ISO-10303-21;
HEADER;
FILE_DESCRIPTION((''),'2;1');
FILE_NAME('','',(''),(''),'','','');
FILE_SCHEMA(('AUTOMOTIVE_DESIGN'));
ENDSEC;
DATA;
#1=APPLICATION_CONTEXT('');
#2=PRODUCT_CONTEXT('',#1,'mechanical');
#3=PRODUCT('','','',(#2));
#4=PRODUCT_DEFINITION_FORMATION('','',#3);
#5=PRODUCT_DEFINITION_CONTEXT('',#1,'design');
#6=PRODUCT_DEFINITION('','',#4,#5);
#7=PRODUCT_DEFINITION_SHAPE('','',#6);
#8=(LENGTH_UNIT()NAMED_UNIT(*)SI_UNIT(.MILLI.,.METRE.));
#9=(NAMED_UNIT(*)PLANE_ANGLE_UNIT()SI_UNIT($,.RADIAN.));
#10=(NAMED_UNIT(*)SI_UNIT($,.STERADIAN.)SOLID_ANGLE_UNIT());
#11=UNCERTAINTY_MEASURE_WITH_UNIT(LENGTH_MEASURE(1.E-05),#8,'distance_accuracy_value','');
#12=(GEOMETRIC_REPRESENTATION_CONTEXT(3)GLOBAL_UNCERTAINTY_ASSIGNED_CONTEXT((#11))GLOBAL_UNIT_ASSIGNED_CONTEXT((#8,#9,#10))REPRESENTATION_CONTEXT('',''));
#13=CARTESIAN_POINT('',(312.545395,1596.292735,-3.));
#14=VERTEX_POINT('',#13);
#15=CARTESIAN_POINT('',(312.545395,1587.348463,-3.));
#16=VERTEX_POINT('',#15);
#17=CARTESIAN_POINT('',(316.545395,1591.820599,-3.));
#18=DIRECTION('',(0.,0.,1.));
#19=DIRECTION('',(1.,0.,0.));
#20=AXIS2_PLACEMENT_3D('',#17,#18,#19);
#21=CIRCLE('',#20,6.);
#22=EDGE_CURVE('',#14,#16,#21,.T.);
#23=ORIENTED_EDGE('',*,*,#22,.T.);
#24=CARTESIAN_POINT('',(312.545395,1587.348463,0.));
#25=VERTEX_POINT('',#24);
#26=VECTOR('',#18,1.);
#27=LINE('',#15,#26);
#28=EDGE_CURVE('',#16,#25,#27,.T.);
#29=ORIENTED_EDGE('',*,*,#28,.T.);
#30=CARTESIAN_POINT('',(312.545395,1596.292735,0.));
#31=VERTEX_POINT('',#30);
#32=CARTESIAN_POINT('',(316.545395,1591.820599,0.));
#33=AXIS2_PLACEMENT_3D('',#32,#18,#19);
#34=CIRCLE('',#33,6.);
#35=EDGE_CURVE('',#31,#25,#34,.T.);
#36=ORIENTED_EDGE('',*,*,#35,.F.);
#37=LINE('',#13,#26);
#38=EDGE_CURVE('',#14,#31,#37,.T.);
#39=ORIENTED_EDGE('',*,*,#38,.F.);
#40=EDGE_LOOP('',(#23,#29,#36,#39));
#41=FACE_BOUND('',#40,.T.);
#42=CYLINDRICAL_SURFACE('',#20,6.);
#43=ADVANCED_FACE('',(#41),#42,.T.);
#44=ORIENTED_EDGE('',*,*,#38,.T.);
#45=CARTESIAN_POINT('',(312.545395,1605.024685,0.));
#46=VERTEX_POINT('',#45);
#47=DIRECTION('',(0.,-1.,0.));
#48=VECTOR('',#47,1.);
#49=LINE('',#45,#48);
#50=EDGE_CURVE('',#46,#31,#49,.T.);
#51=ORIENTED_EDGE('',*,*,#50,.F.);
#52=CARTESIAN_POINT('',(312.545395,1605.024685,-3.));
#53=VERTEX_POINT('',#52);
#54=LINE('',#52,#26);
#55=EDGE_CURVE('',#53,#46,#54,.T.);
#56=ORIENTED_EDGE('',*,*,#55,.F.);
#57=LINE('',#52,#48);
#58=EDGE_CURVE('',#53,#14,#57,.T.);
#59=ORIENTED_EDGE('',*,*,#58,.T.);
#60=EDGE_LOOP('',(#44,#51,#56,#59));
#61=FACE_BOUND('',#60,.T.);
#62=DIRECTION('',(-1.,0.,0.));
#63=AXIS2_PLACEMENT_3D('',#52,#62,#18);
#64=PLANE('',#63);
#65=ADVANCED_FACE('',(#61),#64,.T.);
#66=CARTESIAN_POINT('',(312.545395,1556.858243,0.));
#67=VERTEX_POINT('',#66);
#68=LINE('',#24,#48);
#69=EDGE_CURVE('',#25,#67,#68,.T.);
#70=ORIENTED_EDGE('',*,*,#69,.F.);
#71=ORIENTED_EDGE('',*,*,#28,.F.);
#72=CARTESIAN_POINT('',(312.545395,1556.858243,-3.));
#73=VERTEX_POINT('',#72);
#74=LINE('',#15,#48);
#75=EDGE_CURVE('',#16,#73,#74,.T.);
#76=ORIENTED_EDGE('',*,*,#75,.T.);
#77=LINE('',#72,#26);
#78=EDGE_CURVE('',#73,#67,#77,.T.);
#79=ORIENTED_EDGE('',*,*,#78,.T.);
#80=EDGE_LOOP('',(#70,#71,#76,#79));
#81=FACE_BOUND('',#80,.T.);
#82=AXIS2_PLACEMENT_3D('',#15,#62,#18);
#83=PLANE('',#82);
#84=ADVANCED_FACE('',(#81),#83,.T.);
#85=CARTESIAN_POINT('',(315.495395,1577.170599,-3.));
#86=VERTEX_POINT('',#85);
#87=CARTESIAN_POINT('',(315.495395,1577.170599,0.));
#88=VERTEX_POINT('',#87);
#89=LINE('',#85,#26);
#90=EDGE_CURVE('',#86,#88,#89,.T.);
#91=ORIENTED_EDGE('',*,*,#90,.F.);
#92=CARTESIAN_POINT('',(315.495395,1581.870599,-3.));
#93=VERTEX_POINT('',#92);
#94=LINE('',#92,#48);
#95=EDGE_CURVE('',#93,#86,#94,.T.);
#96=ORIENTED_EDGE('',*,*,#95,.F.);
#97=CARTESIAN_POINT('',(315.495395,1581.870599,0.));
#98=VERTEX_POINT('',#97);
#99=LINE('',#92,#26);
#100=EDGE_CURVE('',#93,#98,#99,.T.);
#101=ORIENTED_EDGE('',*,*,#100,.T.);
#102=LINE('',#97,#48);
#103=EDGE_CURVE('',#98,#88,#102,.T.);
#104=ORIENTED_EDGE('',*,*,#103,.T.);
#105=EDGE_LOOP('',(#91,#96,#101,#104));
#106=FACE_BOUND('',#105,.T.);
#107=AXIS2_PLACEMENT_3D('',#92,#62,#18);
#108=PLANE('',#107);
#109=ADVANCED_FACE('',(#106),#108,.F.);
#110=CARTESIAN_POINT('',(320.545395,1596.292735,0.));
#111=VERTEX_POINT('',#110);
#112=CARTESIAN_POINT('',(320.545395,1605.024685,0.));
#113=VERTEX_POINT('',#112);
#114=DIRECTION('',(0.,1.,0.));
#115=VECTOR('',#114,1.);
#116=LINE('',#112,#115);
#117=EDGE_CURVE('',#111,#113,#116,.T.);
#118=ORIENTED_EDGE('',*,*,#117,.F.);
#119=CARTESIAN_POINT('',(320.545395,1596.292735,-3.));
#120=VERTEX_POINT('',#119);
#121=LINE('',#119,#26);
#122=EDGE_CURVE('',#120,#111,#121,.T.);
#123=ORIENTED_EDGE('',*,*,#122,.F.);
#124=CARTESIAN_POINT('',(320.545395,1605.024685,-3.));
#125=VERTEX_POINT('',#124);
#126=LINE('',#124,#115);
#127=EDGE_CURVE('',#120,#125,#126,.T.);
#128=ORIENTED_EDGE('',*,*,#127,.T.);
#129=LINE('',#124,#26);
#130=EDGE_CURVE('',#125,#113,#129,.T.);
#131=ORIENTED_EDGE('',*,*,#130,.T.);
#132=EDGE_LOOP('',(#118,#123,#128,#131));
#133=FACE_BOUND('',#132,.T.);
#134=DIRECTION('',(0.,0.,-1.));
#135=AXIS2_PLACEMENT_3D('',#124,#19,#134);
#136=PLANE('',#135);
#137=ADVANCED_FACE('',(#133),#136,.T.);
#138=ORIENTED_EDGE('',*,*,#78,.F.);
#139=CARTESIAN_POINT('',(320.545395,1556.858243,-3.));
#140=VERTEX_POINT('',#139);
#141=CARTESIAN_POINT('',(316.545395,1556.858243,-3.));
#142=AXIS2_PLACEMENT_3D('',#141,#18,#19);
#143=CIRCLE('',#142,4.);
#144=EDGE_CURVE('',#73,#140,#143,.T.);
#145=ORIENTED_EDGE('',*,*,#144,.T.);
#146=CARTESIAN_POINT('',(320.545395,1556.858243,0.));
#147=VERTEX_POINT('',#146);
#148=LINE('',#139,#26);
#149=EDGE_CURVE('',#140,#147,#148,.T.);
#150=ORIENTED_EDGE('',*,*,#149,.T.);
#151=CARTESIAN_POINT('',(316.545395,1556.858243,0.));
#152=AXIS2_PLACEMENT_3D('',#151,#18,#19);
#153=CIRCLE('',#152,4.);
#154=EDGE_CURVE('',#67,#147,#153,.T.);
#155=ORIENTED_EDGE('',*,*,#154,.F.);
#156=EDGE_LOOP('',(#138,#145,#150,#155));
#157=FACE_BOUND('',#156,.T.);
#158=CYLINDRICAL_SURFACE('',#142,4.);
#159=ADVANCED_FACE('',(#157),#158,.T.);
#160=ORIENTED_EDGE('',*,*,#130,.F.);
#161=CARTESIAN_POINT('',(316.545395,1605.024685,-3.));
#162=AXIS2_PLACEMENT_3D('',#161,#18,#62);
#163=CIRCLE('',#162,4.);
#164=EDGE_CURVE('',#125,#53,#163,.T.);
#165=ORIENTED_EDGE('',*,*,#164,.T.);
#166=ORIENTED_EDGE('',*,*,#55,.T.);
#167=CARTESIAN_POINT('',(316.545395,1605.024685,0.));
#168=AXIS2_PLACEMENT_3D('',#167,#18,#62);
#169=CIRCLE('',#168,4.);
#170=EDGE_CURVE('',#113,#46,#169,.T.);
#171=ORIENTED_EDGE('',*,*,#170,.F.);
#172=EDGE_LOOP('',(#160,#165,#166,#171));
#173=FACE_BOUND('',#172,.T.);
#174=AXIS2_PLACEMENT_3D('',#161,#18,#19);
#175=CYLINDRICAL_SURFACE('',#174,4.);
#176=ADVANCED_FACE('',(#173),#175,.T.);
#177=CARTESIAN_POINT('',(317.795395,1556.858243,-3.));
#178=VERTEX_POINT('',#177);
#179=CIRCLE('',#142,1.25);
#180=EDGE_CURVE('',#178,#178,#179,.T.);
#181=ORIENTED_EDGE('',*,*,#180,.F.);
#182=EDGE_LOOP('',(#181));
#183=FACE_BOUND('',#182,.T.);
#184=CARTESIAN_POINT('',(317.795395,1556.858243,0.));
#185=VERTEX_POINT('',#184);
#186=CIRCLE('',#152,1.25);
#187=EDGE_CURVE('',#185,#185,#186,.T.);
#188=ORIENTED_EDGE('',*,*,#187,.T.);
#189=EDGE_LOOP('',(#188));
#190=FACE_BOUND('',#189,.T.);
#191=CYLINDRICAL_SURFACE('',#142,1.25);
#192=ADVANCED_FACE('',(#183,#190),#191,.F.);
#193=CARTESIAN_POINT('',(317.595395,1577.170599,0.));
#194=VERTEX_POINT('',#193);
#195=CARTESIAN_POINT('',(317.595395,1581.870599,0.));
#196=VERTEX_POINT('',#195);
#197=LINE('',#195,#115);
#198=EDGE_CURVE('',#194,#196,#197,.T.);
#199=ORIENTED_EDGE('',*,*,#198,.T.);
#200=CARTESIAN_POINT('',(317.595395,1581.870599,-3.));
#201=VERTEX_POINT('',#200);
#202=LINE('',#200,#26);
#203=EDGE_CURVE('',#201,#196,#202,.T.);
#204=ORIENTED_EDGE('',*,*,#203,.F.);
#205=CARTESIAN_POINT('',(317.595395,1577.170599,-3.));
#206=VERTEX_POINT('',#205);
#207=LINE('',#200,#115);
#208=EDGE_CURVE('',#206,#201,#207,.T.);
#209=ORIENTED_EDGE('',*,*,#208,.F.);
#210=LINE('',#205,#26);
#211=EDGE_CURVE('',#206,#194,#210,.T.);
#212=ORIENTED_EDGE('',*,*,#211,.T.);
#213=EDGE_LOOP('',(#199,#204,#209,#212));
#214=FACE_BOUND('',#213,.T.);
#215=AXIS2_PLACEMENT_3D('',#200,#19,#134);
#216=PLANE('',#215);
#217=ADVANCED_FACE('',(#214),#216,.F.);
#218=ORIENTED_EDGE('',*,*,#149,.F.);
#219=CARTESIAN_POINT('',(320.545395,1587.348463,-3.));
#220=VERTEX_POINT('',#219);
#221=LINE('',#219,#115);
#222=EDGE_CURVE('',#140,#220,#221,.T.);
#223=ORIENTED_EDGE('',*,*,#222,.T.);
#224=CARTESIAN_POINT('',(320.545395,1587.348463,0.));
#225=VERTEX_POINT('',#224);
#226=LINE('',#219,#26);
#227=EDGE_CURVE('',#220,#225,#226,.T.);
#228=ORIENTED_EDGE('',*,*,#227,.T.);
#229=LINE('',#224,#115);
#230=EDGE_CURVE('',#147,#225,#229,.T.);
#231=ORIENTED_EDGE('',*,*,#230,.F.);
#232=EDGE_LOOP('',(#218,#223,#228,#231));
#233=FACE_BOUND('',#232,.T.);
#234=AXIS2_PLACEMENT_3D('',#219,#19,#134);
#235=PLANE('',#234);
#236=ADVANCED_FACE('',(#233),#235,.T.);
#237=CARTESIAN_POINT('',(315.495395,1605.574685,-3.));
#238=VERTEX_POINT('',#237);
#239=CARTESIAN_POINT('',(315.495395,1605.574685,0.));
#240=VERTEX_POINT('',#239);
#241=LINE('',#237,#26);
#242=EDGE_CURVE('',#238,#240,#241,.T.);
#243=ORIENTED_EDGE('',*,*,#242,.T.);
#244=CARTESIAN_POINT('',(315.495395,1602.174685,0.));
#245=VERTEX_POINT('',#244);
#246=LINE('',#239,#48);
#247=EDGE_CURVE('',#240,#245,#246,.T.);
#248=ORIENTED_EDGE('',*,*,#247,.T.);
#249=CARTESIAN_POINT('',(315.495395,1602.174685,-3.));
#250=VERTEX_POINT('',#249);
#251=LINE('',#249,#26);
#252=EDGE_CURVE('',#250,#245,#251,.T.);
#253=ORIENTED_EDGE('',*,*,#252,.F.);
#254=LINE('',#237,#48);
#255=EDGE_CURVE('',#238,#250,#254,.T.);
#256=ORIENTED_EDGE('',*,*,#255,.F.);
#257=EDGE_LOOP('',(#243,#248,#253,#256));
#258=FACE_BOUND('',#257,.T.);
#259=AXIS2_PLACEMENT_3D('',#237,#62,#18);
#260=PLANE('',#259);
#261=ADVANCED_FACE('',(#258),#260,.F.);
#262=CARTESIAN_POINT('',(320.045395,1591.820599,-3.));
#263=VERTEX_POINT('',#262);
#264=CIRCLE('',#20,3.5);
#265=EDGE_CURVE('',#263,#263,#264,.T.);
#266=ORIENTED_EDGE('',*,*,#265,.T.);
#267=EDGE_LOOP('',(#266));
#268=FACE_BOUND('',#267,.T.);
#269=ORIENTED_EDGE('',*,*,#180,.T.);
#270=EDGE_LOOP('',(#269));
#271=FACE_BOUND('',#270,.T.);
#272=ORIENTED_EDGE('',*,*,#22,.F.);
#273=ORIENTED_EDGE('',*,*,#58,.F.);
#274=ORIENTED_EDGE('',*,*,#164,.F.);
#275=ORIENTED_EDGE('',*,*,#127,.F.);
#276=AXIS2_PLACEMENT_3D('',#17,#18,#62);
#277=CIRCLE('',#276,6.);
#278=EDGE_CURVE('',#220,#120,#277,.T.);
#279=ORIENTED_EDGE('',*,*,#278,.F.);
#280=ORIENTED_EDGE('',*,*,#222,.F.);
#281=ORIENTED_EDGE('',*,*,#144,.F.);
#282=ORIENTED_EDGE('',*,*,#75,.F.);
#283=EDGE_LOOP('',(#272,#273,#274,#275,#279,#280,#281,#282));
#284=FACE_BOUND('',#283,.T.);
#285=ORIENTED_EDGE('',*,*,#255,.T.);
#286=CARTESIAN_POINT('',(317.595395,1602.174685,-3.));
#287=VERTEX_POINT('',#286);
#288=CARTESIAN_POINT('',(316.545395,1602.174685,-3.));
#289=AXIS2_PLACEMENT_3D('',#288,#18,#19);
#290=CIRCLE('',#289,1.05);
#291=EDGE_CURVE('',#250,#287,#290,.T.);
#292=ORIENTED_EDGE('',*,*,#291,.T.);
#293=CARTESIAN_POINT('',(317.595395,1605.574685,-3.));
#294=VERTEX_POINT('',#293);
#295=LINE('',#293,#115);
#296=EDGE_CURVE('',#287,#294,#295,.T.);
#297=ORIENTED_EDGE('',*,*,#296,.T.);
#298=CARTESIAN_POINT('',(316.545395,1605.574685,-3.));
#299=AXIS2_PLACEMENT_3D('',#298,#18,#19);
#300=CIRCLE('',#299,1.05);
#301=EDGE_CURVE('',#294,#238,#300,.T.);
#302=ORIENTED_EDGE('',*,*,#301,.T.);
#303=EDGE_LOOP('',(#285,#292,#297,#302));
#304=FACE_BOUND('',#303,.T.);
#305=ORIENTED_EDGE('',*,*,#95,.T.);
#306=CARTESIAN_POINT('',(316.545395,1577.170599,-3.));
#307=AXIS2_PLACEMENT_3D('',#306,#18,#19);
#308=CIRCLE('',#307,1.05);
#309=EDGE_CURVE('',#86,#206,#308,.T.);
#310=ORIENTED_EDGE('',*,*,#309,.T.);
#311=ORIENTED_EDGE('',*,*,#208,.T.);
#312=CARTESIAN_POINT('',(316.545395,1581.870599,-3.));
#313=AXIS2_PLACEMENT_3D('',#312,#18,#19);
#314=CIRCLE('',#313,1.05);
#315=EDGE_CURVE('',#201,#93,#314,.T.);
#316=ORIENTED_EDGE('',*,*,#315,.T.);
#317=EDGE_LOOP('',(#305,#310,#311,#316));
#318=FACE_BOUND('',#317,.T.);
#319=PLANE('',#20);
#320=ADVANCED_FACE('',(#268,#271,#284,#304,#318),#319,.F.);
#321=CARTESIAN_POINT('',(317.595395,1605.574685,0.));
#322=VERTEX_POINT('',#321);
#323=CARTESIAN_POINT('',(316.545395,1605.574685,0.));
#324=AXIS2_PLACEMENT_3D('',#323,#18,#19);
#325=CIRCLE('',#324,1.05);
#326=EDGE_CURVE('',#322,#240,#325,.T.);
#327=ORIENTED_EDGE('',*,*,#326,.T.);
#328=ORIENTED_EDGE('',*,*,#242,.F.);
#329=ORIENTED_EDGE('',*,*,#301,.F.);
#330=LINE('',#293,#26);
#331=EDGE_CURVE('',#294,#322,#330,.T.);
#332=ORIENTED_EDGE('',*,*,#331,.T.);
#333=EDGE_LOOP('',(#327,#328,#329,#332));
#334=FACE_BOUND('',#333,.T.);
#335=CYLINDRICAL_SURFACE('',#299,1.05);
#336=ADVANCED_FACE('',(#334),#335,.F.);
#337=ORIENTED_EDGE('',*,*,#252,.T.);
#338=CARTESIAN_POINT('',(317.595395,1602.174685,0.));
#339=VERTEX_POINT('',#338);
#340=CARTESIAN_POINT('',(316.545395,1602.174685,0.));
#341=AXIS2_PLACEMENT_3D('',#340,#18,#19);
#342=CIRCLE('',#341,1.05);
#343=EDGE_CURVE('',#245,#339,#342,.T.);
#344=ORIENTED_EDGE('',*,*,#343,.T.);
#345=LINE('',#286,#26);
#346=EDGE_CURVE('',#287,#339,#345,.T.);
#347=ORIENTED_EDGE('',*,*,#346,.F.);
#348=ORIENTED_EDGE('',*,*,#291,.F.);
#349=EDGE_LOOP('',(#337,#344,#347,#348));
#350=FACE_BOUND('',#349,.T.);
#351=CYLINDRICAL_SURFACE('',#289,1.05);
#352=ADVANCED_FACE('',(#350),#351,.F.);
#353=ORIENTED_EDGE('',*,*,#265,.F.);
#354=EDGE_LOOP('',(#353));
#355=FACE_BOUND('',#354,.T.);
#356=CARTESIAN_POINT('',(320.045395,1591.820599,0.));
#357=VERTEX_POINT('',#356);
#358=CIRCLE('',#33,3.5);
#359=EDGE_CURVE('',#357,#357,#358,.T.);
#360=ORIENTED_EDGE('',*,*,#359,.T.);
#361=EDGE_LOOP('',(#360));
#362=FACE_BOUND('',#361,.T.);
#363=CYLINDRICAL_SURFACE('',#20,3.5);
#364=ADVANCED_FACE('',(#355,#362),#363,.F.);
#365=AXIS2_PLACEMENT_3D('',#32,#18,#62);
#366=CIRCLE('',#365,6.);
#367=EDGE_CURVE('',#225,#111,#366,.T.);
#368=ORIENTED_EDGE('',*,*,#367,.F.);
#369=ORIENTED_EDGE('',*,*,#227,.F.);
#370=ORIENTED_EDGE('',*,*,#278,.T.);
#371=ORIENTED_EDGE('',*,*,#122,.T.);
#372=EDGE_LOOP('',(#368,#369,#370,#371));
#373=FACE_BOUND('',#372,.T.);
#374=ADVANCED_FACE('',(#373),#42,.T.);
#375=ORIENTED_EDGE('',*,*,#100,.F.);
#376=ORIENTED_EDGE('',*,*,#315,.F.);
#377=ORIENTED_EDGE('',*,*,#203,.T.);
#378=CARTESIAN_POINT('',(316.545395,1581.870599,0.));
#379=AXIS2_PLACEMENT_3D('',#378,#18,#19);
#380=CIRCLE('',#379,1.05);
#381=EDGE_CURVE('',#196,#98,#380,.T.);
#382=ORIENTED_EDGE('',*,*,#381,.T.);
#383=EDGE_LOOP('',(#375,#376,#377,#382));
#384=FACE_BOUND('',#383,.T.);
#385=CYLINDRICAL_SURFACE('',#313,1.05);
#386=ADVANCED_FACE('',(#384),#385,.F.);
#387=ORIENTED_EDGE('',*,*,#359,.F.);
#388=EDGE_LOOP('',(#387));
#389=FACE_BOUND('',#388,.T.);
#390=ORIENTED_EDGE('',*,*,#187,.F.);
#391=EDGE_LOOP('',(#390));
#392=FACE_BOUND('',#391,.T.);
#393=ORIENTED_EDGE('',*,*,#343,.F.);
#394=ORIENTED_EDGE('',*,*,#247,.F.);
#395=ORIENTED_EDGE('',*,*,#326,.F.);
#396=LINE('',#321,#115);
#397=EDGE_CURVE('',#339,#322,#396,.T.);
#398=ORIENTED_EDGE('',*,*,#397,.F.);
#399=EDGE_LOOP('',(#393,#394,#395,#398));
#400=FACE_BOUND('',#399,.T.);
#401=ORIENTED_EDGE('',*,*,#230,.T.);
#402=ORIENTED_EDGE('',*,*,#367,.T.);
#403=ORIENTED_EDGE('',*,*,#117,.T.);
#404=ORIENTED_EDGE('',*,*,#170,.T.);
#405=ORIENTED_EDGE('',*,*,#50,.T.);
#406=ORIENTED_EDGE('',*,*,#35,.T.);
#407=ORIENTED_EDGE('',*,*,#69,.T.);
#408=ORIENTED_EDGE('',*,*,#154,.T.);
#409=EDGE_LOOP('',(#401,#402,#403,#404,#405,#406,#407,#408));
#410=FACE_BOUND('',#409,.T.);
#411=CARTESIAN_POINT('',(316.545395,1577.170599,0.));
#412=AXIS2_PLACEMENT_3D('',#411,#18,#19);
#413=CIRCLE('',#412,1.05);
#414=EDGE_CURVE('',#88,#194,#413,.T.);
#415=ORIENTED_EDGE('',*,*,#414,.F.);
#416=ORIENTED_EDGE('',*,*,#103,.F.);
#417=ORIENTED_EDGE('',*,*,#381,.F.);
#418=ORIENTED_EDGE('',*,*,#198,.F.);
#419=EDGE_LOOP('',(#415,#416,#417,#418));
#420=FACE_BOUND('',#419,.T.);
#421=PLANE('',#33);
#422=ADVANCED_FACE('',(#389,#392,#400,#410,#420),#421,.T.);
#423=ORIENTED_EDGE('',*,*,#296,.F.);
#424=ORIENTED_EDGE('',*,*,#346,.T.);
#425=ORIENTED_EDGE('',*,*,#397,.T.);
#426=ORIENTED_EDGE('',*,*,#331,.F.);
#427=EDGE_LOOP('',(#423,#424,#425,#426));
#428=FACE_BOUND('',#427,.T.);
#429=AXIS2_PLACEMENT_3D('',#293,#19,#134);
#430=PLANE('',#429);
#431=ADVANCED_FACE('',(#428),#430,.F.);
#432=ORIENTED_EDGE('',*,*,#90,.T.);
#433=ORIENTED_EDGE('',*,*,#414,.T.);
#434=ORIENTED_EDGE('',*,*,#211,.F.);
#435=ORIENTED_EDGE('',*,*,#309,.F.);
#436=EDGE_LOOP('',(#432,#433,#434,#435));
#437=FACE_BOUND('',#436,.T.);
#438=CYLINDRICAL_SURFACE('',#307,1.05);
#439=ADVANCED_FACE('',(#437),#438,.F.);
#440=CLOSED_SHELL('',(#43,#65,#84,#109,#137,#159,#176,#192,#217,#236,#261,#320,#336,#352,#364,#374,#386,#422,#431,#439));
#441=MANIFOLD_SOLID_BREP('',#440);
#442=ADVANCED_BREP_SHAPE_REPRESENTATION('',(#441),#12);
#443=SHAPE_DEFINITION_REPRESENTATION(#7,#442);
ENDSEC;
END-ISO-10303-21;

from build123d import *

# Parameters (mm, degrees)
ESQUISSE1_R               = 3.5
ESQUISSE1_R_2             = 1.25
T_LE_DE_BASE_PLI_E1_DEPTH = 3


# Sheet-metal steps are written as plain solids
with BuildPart() as part:
    # Esquisse1 → Tôle de base pliée1 (new body)
    with BuildSketch(Plane.XY):
        with BuildLine():
            Line((312.545394727, 1587.348462935), (312.545394727, 1556.858242671))
            ThreePointArc((312.545394727, 1556.858242671), (316.545394727, 1552.858242671), (320.545394727, 1556.858242671))
            Line((320.545394727, 1556.858242671), (320.545394727, 1587.348462935))
            ThreePointArc((320.545394727, 1587.348462935), (322.545394727, 1591.82059889), (320.545394727, 1596.292734845))
            Line((320.545394727, 1596.292734845), (320.545394727, 1605.02468454))
            ThreePointArc((320.545394727, 1605.02468454), (316.545394727, 1609.02468454), (312.545394727, 1605.02468454))
            Line((312.545394727, 1605.02468454), (312.545394727, 1596.292734845))
            ThreePointArc((312.545394727, 1596.292734845), (310.545394727, 1591.82059889), (312.545394727, 1587.348462935))
        make_face()
        with Locations((316.545394727, 1591.82059889)):
            Circle(ESQUISSE1_R, mode=Mode.SUBTRACT)
        with Locations((316.545394727, 1556.858242671)):
            Circle(ESQUISSE1_R_2, mode=Mode.SUBTRACT)
        with BuildLine():
            Line((315.495394727, 1605.57468454), (315.495394727, 1602.17468454))
            ThreePointArc((315.495394727, 1602.17468454), (316.545394727, 1601.12468454), (317.595394727, 1602.17468454))
            Line((317.595394727, 1602.17468454), (317.595394727, 1605.57468454))
            ThreePointArc((317.595394727, 1605.57468454), (316.545394727, 1606.62468454), (315.495394727, 1605.57468454))
        make_face(mode=Mode.SUBTRACT)
        with BuildLine():
            Line((315.495394727, 1581.87059889), (315.495394727, 1577.17059889))
            ThreePointArc((315.495394727, 1577.17059889), (316.545394727, 1576.12059889), (317.595394727, 1577.17059889))
            Line((317.595394727, 1577.17059889), (317.595394727, 1581.87059889))
            ThreePointArc((317.595394727, 1581.87059889), (316.545394727, 1582.92059889), (315.495394727, 1581.87059889))
        make_face(mode=Mode.SUBTRACT)
    extrude(amount=-T_LE_DE_BASE_PLI_E1_DEPTH)


solid = part.part
